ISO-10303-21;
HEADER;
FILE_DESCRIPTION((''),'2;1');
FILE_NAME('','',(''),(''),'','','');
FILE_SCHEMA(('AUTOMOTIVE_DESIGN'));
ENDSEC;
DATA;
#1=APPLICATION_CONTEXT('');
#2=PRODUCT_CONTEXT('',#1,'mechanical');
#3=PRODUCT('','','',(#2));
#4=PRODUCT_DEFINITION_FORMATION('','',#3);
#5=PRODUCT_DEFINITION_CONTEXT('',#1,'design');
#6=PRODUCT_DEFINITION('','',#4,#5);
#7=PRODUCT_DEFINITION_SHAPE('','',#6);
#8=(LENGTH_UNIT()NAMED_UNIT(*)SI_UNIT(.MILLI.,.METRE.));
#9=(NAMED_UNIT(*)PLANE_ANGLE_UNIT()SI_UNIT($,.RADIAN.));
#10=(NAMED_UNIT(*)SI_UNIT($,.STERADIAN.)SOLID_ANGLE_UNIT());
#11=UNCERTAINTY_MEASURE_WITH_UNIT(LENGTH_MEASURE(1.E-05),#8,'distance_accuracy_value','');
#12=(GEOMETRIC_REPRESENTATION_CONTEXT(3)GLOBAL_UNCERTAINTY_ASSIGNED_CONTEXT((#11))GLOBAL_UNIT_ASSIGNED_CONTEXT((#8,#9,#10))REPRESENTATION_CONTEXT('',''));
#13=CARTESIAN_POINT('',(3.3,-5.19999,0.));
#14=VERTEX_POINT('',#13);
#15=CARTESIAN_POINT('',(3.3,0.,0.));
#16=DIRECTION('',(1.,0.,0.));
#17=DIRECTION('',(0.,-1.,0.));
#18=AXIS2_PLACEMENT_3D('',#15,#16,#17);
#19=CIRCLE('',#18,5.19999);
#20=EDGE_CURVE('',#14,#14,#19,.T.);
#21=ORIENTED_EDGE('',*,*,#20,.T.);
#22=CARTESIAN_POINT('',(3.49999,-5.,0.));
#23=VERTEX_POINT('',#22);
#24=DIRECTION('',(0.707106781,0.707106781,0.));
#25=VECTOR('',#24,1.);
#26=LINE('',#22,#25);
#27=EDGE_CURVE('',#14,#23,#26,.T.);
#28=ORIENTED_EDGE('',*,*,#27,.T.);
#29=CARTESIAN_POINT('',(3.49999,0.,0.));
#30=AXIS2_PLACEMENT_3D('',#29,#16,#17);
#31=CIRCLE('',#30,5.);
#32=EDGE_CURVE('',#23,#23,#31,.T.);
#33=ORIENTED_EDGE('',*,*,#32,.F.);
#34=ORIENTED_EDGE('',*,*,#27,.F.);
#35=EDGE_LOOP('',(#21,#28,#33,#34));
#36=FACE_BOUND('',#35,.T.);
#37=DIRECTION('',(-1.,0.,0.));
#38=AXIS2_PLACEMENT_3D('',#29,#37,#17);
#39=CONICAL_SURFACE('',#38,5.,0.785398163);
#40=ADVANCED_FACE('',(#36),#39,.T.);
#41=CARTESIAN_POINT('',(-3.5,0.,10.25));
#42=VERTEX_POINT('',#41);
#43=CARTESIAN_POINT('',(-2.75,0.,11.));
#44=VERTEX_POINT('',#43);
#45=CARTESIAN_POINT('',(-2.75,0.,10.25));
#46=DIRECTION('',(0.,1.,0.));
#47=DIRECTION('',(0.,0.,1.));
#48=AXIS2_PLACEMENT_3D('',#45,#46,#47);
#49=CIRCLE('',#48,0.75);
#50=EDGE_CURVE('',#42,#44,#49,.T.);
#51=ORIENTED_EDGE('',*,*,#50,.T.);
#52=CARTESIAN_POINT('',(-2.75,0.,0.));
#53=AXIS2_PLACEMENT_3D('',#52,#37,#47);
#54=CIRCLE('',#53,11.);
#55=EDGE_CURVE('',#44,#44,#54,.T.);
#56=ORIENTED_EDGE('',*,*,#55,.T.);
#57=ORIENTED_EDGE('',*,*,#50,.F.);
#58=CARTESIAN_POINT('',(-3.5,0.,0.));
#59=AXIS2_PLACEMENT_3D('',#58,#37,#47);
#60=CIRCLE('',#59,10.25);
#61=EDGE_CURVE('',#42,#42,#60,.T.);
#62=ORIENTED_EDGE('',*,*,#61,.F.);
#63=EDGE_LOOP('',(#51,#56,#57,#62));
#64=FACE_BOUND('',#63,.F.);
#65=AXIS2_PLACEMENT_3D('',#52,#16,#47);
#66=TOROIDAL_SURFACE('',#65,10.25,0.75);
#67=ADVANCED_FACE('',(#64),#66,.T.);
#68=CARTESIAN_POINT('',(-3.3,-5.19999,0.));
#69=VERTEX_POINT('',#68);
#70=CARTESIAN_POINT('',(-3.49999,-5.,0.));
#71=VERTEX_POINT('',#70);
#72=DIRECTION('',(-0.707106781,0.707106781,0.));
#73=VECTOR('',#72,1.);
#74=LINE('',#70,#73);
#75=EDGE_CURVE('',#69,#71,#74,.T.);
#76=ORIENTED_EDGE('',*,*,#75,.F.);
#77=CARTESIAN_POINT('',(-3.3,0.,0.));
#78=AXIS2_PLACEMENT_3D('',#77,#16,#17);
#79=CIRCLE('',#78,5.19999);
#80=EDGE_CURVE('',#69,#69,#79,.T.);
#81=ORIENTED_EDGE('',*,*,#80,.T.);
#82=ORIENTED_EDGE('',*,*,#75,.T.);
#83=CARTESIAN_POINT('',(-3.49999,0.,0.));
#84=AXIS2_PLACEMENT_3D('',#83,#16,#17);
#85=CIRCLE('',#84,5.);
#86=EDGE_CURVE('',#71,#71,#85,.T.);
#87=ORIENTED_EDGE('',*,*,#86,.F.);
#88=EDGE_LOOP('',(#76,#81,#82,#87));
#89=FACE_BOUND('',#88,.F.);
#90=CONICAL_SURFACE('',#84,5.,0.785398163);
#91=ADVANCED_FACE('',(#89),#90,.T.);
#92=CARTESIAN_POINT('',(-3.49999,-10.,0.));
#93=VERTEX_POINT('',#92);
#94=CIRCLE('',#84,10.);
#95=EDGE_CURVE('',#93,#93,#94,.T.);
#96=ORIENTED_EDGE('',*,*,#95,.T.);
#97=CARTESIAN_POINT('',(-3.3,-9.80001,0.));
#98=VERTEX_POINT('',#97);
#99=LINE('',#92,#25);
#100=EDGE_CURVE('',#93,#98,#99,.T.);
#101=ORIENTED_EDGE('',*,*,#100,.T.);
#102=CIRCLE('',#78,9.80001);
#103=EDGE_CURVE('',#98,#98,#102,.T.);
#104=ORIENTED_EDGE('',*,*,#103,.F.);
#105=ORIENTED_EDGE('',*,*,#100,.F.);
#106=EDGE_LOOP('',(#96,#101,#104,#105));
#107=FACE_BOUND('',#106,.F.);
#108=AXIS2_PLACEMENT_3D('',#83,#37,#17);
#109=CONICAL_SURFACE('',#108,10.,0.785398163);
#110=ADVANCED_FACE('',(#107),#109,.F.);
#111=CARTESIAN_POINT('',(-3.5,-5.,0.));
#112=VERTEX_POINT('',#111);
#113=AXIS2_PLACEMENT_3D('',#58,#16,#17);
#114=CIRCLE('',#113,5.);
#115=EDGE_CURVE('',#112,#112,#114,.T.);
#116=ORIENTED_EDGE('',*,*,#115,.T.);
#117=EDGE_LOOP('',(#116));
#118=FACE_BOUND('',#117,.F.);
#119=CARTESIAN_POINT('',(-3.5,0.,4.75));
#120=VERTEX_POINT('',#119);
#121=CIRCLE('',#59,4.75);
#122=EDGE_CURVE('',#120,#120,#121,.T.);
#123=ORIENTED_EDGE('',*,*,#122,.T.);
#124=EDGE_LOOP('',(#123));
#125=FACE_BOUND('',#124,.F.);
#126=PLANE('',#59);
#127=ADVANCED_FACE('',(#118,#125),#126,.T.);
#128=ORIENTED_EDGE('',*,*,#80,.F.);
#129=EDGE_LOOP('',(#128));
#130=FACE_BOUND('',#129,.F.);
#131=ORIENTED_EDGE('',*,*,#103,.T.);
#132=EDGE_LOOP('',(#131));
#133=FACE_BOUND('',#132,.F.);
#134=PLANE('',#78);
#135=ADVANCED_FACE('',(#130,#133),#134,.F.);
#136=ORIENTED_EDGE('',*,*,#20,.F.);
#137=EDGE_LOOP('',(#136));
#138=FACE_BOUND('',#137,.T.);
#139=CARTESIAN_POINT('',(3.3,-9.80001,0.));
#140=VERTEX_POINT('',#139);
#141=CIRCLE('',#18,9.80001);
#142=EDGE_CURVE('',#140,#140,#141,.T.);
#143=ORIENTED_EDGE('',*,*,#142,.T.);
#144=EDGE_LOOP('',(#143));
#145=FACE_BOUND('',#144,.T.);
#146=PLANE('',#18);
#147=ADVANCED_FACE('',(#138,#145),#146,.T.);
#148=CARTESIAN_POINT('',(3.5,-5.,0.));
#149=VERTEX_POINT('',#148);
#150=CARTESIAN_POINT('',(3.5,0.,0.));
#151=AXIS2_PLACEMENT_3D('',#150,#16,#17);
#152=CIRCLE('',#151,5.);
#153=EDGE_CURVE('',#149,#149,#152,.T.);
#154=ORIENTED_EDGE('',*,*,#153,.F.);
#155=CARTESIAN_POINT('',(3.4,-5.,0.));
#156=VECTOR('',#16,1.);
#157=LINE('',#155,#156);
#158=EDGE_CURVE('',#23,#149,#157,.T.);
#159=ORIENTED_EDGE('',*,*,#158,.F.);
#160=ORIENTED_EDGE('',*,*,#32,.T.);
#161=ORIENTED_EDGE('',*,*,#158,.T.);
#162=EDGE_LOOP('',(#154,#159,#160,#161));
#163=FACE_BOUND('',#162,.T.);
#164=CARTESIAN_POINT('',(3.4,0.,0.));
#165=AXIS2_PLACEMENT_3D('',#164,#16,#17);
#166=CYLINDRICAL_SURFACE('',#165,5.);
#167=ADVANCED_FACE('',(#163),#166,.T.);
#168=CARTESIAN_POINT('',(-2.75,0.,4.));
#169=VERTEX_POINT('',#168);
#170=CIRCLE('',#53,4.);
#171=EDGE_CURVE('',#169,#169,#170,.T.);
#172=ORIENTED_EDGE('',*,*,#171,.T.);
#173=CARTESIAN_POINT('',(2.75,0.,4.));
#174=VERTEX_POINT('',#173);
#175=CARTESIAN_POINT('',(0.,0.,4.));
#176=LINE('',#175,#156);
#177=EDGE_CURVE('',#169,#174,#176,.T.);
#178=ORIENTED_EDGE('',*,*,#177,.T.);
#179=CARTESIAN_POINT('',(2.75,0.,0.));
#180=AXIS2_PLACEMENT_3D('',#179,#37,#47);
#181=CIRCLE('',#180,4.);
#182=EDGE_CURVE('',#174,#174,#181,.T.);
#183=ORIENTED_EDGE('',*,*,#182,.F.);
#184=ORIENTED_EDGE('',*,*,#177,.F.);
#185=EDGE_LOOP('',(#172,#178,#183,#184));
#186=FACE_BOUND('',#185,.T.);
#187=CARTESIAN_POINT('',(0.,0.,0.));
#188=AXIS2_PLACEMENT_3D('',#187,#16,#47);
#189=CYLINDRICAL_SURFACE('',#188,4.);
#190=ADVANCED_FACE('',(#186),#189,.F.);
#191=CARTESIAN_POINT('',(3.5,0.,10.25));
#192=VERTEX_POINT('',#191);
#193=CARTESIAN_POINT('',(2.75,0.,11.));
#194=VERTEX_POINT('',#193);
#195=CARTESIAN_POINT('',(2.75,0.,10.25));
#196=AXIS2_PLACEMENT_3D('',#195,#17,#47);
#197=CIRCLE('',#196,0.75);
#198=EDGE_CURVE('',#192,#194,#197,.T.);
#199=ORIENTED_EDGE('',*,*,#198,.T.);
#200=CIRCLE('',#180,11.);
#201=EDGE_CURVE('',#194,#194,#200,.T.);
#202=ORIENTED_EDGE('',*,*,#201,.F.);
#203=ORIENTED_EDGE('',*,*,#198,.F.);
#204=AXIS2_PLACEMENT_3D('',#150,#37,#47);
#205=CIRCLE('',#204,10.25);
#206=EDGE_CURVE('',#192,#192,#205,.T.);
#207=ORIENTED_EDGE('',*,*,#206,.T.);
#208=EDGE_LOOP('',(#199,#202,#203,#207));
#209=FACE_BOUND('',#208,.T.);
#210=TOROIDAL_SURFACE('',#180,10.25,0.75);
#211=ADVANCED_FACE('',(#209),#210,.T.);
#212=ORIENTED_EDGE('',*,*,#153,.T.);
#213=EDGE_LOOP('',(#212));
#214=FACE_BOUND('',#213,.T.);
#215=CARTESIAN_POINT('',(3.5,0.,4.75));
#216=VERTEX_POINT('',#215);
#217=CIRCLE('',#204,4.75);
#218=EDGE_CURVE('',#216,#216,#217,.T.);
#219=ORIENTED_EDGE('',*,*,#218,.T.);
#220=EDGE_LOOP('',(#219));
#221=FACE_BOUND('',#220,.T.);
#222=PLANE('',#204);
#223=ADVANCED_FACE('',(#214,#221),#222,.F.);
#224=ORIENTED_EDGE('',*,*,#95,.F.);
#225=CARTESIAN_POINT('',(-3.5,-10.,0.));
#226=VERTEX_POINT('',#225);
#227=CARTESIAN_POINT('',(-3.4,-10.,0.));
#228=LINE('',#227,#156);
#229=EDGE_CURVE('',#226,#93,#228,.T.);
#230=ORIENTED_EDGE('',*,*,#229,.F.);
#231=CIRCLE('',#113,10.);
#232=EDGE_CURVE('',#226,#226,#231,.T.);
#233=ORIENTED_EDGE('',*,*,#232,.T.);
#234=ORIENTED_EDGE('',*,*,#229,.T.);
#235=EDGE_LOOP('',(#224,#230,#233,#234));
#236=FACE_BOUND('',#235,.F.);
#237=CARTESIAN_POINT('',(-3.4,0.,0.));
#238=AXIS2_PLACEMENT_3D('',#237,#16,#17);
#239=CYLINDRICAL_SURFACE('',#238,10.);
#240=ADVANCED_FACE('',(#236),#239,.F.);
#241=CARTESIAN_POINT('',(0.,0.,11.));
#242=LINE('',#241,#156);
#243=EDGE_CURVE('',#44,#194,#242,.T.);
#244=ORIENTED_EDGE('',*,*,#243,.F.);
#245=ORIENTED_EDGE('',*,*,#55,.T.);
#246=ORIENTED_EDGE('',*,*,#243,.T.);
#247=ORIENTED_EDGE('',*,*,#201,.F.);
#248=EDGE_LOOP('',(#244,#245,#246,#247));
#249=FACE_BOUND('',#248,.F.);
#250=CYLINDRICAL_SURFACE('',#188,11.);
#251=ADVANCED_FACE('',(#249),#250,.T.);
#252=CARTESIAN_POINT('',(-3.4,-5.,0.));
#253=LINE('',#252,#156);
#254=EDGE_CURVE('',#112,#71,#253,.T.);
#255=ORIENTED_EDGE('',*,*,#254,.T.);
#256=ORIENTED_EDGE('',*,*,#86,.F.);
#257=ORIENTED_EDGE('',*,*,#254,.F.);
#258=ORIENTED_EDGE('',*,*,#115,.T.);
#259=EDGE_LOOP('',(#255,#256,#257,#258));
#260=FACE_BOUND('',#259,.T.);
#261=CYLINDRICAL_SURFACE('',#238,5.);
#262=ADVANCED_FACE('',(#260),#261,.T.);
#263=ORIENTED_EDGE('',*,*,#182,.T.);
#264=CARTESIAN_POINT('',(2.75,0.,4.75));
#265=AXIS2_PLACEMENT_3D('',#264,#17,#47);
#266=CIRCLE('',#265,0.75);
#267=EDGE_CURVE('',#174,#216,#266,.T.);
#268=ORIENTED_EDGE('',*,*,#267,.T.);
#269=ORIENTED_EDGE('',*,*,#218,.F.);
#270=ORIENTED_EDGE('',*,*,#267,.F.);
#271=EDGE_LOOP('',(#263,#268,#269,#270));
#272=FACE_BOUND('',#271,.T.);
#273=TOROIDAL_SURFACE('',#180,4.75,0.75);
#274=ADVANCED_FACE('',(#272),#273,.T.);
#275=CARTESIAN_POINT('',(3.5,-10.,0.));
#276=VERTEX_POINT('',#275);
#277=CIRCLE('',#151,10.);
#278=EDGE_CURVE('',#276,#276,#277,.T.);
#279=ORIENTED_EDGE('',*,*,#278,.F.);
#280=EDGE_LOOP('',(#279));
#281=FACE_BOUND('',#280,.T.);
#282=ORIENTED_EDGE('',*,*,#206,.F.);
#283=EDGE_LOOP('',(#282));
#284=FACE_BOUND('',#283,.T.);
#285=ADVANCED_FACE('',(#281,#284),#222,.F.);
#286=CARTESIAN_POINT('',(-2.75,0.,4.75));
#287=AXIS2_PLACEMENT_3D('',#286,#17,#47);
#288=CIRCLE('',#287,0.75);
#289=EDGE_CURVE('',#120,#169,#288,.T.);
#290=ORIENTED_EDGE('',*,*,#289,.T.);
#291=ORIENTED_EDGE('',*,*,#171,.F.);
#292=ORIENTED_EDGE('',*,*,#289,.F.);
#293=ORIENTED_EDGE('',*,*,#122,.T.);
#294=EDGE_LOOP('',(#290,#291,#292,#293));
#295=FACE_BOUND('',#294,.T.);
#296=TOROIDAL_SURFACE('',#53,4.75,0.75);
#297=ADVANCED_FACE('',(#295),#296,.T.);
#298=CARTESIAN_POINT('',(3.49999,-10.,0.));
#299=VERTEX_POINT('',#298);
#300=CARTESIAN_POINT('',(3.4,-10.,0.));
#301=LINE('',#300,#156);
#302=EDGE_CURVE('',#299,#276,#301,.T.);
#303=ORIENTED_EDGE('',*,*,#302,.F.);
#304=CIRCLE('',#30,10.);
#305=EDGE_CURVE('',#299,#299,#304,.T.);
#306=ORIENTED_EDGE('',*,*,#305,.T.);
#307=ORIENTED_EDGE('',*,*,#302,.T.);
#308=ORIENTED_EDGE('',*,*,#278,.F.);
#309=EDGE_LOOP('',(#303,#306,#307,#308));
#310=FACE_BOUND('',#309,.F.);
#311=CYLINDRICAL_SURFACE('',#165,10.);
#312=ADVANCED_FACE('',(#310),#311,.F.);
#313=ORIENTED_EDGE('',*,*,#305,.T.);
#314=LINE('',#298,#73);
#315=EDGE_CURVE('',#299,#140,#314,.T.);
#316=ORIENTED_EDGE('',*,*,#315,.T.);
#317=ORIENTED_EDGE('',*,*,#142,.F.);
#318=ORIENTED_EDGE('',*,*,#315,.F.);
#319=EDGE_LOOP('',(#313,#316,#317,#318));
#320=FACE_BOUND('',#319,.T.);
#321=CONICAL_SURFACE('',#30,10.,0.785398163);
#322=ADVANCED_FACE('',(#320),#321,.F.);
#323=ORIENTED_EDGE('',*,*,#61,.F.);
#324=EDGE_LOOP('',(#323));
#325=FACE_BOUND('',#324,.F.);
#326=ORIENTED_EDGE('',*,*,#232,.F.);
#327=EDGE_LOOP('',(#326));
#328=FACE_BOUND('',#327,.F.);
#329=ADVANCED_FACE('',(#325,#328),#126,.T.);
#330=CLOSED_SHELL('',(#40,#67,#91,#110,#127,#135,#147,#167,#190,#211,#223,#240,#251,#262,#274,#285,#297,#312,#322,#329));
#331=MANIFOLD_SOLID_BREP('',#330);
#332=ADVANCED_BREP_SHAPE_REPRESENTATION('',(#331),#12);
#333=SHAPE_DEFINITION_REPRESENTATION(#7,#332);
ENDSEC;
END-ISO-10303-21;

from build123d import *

# Parameters (mm, degrees)
F0_W    = 7
F0_H    = 7
F2_R    = 0.75
F3_W    = 0.2
F3_H    = 5
F5_SIZE = 0.19999


# Not quite as in the source:
# - a fillet or chamfer is up to 0.001 mm smaller than in the source, because OpenCascade refuses the exact size


with BuildPart() as f1:
    # F0 (on Front) → F1 (revolve)
    with BuildSketch(Plane.XZ):
        with Locations((0, 7.5)):
            Rectangle(F0_W, F0_H)
    revolve(axis=Axis((-0.6671294104, 0, 0), (-1, 0, 0)))

    # F2
    f2_edges = [f1.edges().sort_by_distance(p)[0] for p in [
        (-3.5, 0, -11),
        (-3.5, 0, -4),
        (3.5, 0, -11),
        (3.5, 0, -4),
    ]]
    fillet(f2_edges, radius=F2_R)

    # F3 (on Top) → F4 (revolve, cut)
    with BuildSketch(Plane.XY):
        with Locations((-3.4, -7.5)):
            Rectangle(F3_W, F3_H)
        with Locations((3.4, -7.5)):
            Rectangle(F3_W, F3_H)
    revolve(axis=Axis((0.1337367576, 0, 0), (1, 0, 0)), mode=Mode.SUBTRACT)

    # F5 (size 0.2 in the source; OpenCascade refuses exactly that, so slightly less here)
    f5_edges = [f1.edges().sort_by_distance(p)[0] for p in [
        (-3.3, 10, 0),
        (-3.3, 5, 0),
        (3.3, 10, 0),
        (3.3, 5, 0),
    ]]
    chamfer(f5_edges, length=F5_SIZE)


solid = f1.part
